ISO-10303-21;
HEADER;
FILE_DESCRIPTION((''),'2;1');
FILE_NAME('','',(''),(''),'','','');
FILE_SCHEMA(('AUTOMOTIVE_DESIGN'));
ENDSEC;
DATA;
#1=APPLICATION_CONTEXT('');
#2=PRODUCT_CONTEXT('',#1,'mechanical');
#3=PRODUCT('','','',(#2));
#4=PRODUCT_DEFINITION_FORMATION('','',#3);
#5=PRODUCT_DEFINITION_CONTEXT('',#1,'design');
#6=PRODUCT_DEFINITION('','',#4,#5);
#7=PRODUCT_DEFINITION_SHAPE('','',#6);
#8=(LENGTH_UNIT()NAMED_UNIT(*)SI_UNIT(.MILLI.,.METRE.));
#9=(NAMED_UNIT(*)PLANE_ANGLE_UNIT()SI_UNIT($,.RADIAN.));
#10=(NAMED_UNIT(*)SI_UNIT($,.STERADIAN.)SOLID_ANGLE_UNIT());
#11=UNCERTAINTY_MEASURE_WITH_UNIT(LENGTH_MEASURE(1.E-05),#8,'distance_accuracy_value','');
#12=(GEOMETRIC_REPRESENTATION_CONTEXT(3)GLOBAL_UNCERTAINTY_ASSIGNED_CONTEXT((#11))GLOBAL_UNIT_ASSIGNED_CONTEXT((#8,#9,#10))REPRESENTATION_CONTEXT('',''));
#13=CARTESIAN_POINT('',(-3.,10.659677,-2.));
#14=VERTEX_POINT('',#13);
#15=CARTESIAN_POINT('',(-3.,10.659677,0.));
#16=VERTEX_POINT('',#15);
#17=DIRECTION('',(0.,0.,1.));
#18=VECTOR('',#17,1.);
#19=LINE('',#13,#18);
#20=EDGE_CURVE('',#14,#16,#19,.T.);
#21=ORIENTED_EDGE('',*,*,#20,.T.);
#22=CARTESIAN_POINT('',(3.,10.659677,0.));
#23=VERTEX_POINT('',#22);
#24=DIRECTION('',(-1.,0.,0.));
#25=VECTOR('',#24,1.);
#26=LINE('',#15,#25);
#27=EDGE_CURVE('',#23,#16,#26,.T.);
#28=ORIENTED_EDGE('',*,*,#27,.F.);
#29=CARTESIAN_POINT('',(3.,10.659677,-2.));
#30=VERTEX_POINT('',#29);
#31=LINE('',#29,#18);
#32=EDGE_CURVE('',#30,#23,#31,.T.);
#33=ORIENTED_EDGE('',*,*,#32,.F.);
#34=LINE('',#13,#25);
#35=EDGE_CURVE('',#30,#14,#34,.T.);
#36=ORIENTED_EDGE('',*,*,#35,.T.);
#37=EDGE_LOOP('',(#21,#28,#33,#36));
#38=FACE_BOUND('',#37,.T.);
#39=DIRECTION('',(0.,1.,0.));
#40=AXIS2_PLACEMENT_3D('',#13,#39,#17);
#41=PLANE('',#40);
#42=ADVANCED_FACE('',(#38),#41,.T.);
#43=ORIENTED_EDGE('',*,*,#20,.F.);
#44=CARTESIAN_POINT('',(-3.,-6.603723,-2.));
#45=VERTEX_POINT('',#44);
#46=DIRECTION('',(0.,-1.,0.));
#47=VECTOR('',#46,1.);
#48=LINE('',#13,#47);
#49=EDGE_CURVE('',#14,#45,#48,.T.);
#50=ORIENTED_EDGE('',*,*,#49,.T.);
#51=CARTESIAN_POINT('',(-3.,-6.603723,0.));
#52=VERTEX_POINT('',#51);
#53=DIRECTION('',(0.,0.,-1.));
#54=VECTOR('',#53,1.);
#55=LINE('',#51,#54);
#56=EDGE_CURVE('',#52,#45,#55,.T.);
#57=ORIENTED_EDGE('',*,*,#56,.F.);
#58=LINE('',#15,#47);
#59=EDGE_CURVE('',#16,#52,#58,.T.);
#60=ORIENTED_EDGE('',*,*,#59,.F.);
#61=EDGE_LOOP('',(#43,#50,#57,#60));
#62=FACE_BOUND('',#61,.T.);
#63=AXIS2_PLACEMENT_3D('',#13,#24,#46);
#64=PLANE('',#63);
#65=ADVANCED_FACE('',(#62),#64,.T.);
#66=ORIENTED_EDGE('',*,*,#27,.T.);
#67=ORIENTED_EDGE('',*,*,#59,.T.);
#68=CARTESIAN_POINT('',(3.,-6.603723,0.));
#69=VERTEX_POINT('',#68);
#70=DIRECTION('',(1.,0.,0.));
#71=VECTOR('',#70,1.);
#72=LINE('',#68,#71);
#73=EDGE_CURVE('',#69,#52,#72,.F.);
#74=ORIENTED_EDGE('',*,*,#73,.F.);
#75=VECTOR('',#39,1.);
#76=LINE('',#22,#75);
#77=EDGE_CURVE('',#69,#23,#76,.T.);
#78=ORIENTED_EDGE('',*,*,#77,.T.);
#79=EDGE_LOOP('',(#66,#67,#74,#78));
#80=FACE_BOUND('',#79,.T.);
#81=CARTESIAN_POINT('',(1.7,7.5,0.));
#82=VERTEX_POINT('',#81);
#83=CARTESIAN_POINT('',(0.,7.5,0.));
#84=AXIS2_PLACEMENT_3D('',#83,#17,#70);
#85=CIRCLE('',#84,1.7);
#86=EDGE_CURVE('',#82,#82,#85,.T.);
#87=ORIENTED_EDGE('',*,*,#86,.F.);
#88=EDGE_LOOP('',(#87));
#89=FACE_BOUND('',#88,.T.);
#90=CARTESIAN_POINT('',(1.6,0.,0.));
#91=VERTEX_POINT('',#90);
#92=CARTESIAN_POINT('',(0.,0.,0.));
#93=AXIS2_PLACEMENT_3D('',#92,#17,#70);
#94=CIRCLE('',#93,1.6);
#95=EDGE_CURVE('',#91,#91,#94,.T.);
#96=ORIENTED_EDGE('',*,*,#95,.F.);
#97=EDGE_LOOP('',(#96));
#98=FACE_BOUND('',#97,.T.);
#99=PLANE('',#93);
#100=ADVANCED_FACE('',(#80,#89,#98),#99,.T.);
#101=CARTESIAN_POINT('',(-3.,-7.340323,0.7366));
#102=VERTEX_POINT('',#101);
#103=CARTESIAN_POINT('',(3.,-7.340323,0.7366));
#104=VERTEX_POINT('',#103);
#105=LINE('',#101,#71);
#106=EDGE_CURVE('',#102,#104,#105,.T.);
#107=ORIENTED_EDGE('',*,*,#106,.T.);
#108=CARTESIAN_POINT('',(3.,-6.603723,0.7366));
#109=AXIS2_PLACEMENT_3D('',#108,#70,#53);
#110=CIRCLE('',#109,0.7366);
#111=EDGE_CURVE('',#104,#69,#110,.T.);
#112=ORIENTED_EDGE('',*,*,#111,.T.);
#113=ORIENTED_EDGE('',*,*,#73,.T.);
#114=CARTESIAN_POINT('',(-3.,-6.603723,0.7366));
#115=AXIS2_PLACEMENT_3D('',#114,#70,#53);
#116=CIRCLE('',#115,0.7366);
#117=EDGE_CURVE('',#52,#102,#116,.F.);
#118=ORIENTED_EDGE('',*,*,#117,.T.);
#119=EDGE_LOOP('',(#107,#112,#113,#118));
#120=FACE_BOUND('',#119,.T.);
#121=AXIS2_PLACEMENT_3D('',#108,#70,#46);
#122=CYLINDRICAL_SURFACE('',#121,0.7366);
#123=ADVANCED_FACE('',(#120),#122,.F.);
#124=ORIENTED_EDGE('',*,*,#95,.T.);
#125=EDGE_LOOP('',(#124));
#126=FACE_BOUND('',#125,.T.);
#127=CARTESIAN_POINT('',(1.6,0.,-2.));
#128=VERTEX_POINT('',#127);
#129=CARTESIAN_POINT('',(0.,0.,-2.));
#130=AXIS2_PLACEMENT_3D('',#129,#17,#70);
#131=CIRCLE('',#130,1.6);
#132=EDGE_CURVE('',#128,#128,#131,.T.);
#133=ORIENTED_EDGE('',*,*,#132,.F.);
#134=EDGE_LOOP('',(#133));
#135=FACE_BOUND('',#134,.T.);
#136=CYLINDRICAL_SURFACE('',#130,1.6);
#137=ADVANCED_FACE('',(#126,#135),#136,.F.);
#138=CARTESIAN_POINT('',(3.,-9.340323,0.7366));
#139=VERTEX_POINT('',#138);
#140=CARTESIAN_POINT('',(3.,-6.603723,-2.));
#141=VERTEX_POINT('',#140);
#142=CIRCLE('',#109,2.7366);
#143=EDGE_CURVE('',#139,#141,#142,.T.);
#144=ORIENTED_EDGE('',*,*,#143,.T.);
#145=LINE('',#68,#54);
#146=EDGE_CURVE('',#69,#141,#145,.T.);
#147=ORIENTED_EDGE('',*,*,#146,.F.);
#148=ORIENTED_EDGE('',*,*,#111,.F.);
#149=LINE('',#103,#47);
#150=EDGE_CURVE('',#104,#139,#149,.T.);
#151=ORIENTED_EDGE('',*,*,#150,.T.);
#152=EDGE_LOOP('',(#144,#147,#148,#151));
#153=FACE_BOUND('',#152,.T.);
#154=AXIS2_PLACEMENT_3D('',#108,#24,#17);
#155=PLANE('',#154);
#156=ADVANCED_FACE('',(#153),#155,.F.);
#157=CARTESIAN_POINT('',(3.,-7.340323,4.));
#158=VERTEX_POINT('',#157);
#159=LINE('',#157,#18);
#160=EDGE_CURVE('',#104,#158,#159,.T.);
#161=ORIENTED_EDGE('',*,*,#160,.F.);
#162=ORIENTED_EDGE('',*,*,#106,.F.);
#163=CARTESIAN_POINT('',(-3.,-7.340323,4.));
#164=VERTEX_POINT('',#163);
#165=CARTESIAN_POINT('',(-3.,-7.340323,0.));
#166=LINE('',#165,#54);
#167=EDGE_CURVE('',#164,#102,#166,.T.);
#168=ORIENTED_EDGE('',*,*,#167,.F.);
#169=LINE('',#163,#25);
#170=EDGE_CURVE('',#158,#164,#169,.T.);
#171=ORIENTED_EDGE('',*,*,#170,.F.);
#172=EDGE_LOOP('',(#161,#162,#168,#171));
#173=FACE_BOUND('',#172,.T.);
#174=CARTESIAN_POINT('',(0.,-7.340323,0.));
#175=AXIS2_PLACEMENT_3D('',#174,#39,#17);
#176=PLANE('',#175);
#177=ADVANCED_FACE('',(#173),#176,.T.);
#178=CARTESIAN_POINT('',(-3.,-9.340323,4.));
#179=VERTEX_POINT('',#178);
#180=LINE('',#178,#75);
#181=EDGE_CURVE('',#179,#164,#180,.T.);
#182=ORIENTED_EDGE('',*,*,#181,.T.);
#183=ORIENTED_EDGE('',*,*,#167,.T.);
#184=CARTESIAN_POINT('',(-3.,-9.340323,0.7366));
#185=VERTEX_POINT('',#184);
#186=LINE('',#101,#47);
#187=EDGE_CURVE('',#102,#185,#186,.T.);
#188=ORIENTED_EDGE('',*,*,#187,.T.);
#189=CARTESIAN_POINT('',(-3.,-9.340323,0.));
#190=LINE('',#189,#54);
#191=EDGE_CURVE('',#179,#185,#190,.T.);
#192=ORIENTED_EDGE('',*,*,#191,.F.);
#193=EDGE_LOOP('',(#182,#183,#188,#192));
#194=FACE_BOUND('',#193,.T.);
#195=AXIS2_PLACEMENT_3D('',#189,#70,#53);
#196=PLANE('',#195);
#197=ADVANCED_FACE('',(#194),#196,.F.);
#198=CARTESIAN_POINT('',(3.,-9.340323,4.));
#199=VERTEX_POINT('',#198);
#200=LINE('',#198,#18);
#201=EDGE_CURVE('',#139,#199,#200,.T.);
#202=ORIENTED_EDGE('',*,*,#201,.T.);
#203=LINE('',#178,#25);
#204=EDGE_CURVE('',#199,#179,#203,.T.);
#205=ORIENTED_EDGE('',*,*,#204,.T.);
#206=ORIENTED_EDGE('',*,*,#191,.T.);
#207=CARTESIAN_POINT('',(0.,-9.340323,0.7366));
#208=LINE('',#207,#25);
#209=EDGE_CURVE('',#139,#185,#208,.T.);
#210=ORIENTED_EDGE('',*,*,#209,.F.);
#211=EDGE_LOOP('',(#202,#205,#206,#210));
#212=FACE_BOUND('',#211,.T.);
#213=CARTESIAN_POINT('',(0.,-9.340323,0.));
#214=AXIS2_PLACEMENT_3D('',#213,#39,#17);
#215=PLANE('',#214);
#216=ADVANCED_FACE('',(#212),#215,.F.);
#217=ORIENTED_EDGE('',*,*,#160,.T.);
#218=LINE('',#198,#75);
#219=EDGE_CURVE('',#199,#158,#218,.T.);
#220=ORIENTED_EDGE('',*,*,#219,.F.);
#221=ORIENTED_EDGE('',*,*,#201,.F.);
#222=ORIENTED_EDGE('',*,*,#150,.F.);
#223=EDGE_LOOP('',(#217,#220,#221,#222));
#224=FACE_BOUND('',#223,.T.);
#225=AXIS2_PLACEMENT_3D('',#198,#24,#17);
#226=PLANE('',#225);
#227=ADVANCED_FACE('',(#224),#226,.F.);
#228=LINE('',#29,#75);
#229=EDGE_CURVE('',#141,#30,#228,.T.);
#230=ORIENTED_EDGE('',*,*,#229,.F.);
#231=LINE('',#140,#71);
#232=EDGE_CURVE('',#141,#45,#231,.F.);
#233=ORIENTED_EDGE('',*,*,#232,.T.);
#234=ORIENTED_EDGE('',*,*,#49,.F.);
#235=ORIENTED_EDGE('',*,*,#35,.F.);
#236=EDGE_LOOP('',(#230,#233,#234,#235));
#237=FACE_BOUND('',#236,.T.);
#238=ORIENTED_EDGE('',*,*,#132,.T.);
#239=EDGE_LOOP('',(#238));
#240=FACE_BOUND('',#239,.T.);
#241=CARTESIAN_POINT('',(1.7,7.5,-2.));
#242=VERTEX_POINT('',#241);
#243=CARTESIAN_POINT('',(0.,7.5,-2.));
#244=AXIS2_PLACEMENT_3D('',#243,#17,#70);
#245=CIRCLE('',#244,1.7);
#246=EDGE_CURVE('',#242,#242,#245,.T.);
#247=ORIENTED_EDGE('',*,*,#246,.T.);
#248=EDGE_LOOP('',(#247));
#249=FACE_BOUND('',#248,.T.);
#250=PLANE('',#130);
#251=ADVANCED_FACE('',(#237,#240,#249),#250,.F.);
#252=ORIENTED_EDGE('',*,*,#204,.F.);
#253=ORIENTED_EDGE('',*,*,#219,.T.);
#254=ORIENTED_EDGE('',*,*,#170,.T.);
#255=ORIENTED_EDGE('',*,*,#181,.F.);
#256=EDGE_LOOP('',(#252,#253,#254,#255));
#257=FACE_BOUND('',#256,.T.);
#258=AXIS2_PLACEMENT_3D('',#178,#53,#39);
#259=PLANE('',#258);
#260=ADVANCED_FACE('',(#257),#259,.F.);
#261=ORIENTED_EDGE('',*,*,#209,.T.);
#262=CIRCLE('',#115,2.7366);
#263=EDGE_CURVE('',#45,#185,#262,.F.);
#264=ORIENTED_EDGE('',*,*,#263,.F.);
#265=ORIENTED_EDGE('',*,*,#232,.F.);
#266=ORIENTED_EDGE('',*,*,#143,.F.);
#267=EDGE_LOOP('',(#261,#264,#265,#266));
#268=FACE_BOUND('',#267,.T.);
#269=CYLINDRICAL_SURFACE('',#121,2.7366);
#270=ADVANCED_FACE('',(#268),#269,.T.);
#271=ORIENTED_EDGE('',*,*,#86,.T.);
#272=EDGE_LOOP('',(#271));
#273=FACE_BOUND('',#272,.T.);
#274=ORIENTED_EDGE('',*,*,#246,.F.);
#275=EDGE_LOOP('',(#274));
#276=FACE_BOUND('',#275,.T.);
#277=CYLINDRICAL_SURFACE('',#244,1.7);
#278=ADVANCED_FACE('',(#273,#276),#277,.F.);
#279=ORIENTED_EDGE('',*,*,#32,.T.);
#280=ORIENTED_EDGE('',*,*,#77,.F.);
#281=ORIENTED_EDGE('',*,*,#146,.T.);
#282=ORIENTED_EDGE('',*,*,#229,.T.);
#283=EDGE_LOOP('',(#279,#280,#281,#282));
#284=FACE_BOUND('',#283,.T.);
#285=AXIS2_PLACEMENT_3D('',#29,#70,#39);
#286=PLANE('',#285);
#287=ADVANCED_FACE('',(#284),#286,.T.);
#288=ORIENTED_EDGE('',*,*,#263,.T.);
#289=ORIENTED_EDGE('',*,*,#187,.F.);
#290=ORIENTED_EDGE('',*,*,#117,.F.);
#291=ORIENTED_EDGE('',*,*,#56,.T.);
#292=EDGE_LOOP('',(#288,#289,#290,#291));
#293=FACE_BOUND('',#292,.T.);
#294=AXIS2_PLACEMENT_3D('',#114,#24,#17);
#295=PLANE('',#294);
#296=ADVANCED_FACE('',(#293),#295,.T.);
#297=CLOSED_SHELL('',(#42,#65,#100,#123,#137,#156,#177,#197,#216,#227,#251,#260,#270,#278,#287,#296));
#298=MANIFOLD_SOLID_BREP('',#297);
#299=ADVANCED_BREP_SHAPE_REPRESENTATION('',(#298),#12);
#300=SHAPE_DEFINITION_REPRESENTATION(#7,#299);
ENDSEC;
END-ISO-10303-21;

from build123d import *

# Parameters (mm, degrees)
SKETCH_1_W                       = 6
SKETCH_1_H                       = 18
SKETCH_1_R                       = 1.6
SKETCH_1_R_2                     = 1.7
SM_BASE_FLANGE_1_DEPTH           = 2
SM_EDGE_FLANGE_1_STRIP_W         = 9.4732
SM_EDGE_FLANGE_1_STRIP_H         = 2
SM_EDGE_FLANGE_1_STRIP_CUT_DEPTH = 6
SM_EDGE_FLANGE_1_DEPTH           = 6


# Sheet-metal steps are written as plain solids
with BuildPart() as part:
    # Sketch 1 → Базовая кромка1 (new body)
    with BuildSketch(Plane.XY):
        with Locations((0, 1.659676661)):
            Rectangle(SKETCH_1_W, SKETCH_1_H)
        Circle(SKETCH_1_R, mode=Mode.SUBTRACT)
        with Locations((0, 7.5)):
            Circle(SKETCH_1_R_2, mode=Mode.SUBTRACT)
    extrude(amount=-SM_BASE_FLANGE_1_DEPTH)

    # Ребро-кромка1 strip (across the edge) → Ребро-кромка1 strip cut (cut)
    with BuildSketch(Plane(origin=(-3, -7.340323339, 0), x_dir=(0, 1, 0), z_dir=(1, 0, 0))):
        with Locations((-4, -1)):
            Rectangle(SM_EDGE_FLANGE_1_STRIP_W, SM_EDGE_FLANGE_1_STRIP_H)
    extrude(amount=SM_EDGE_FLANGE_1_STRIP_CUT_DEPTH, mode=Mode.SUBTRACT)

    # Ребро-кромка1 section (across the edge) → Ребро-кромка1 (add)
    with BuildSketch(Plane(origin=(-3, -7.340323339, 0), x_dir=(0, 1, 0), z_dir=(1, 0, 0))):
        with BuildLine():
            Line((-2, 0.7366), (-2, 4))
            Line((-2, 4), (0, 4))
            Line((0, 4), (0, 0.7366))
            ThreePointArc((0, 0.7366), (0.215745145, 0.215745145), (0.7366, 0))
            Line((0.7366, 0), (0.7366, -2))
            ThreePointArc((0.7366, -2), (-1.198468417, -1.198468417), (-2, 0.7366))
        make_face()
    extrude(amount=SM_EDGE_FLANGE_1_DEPTH)


solid = part.part
